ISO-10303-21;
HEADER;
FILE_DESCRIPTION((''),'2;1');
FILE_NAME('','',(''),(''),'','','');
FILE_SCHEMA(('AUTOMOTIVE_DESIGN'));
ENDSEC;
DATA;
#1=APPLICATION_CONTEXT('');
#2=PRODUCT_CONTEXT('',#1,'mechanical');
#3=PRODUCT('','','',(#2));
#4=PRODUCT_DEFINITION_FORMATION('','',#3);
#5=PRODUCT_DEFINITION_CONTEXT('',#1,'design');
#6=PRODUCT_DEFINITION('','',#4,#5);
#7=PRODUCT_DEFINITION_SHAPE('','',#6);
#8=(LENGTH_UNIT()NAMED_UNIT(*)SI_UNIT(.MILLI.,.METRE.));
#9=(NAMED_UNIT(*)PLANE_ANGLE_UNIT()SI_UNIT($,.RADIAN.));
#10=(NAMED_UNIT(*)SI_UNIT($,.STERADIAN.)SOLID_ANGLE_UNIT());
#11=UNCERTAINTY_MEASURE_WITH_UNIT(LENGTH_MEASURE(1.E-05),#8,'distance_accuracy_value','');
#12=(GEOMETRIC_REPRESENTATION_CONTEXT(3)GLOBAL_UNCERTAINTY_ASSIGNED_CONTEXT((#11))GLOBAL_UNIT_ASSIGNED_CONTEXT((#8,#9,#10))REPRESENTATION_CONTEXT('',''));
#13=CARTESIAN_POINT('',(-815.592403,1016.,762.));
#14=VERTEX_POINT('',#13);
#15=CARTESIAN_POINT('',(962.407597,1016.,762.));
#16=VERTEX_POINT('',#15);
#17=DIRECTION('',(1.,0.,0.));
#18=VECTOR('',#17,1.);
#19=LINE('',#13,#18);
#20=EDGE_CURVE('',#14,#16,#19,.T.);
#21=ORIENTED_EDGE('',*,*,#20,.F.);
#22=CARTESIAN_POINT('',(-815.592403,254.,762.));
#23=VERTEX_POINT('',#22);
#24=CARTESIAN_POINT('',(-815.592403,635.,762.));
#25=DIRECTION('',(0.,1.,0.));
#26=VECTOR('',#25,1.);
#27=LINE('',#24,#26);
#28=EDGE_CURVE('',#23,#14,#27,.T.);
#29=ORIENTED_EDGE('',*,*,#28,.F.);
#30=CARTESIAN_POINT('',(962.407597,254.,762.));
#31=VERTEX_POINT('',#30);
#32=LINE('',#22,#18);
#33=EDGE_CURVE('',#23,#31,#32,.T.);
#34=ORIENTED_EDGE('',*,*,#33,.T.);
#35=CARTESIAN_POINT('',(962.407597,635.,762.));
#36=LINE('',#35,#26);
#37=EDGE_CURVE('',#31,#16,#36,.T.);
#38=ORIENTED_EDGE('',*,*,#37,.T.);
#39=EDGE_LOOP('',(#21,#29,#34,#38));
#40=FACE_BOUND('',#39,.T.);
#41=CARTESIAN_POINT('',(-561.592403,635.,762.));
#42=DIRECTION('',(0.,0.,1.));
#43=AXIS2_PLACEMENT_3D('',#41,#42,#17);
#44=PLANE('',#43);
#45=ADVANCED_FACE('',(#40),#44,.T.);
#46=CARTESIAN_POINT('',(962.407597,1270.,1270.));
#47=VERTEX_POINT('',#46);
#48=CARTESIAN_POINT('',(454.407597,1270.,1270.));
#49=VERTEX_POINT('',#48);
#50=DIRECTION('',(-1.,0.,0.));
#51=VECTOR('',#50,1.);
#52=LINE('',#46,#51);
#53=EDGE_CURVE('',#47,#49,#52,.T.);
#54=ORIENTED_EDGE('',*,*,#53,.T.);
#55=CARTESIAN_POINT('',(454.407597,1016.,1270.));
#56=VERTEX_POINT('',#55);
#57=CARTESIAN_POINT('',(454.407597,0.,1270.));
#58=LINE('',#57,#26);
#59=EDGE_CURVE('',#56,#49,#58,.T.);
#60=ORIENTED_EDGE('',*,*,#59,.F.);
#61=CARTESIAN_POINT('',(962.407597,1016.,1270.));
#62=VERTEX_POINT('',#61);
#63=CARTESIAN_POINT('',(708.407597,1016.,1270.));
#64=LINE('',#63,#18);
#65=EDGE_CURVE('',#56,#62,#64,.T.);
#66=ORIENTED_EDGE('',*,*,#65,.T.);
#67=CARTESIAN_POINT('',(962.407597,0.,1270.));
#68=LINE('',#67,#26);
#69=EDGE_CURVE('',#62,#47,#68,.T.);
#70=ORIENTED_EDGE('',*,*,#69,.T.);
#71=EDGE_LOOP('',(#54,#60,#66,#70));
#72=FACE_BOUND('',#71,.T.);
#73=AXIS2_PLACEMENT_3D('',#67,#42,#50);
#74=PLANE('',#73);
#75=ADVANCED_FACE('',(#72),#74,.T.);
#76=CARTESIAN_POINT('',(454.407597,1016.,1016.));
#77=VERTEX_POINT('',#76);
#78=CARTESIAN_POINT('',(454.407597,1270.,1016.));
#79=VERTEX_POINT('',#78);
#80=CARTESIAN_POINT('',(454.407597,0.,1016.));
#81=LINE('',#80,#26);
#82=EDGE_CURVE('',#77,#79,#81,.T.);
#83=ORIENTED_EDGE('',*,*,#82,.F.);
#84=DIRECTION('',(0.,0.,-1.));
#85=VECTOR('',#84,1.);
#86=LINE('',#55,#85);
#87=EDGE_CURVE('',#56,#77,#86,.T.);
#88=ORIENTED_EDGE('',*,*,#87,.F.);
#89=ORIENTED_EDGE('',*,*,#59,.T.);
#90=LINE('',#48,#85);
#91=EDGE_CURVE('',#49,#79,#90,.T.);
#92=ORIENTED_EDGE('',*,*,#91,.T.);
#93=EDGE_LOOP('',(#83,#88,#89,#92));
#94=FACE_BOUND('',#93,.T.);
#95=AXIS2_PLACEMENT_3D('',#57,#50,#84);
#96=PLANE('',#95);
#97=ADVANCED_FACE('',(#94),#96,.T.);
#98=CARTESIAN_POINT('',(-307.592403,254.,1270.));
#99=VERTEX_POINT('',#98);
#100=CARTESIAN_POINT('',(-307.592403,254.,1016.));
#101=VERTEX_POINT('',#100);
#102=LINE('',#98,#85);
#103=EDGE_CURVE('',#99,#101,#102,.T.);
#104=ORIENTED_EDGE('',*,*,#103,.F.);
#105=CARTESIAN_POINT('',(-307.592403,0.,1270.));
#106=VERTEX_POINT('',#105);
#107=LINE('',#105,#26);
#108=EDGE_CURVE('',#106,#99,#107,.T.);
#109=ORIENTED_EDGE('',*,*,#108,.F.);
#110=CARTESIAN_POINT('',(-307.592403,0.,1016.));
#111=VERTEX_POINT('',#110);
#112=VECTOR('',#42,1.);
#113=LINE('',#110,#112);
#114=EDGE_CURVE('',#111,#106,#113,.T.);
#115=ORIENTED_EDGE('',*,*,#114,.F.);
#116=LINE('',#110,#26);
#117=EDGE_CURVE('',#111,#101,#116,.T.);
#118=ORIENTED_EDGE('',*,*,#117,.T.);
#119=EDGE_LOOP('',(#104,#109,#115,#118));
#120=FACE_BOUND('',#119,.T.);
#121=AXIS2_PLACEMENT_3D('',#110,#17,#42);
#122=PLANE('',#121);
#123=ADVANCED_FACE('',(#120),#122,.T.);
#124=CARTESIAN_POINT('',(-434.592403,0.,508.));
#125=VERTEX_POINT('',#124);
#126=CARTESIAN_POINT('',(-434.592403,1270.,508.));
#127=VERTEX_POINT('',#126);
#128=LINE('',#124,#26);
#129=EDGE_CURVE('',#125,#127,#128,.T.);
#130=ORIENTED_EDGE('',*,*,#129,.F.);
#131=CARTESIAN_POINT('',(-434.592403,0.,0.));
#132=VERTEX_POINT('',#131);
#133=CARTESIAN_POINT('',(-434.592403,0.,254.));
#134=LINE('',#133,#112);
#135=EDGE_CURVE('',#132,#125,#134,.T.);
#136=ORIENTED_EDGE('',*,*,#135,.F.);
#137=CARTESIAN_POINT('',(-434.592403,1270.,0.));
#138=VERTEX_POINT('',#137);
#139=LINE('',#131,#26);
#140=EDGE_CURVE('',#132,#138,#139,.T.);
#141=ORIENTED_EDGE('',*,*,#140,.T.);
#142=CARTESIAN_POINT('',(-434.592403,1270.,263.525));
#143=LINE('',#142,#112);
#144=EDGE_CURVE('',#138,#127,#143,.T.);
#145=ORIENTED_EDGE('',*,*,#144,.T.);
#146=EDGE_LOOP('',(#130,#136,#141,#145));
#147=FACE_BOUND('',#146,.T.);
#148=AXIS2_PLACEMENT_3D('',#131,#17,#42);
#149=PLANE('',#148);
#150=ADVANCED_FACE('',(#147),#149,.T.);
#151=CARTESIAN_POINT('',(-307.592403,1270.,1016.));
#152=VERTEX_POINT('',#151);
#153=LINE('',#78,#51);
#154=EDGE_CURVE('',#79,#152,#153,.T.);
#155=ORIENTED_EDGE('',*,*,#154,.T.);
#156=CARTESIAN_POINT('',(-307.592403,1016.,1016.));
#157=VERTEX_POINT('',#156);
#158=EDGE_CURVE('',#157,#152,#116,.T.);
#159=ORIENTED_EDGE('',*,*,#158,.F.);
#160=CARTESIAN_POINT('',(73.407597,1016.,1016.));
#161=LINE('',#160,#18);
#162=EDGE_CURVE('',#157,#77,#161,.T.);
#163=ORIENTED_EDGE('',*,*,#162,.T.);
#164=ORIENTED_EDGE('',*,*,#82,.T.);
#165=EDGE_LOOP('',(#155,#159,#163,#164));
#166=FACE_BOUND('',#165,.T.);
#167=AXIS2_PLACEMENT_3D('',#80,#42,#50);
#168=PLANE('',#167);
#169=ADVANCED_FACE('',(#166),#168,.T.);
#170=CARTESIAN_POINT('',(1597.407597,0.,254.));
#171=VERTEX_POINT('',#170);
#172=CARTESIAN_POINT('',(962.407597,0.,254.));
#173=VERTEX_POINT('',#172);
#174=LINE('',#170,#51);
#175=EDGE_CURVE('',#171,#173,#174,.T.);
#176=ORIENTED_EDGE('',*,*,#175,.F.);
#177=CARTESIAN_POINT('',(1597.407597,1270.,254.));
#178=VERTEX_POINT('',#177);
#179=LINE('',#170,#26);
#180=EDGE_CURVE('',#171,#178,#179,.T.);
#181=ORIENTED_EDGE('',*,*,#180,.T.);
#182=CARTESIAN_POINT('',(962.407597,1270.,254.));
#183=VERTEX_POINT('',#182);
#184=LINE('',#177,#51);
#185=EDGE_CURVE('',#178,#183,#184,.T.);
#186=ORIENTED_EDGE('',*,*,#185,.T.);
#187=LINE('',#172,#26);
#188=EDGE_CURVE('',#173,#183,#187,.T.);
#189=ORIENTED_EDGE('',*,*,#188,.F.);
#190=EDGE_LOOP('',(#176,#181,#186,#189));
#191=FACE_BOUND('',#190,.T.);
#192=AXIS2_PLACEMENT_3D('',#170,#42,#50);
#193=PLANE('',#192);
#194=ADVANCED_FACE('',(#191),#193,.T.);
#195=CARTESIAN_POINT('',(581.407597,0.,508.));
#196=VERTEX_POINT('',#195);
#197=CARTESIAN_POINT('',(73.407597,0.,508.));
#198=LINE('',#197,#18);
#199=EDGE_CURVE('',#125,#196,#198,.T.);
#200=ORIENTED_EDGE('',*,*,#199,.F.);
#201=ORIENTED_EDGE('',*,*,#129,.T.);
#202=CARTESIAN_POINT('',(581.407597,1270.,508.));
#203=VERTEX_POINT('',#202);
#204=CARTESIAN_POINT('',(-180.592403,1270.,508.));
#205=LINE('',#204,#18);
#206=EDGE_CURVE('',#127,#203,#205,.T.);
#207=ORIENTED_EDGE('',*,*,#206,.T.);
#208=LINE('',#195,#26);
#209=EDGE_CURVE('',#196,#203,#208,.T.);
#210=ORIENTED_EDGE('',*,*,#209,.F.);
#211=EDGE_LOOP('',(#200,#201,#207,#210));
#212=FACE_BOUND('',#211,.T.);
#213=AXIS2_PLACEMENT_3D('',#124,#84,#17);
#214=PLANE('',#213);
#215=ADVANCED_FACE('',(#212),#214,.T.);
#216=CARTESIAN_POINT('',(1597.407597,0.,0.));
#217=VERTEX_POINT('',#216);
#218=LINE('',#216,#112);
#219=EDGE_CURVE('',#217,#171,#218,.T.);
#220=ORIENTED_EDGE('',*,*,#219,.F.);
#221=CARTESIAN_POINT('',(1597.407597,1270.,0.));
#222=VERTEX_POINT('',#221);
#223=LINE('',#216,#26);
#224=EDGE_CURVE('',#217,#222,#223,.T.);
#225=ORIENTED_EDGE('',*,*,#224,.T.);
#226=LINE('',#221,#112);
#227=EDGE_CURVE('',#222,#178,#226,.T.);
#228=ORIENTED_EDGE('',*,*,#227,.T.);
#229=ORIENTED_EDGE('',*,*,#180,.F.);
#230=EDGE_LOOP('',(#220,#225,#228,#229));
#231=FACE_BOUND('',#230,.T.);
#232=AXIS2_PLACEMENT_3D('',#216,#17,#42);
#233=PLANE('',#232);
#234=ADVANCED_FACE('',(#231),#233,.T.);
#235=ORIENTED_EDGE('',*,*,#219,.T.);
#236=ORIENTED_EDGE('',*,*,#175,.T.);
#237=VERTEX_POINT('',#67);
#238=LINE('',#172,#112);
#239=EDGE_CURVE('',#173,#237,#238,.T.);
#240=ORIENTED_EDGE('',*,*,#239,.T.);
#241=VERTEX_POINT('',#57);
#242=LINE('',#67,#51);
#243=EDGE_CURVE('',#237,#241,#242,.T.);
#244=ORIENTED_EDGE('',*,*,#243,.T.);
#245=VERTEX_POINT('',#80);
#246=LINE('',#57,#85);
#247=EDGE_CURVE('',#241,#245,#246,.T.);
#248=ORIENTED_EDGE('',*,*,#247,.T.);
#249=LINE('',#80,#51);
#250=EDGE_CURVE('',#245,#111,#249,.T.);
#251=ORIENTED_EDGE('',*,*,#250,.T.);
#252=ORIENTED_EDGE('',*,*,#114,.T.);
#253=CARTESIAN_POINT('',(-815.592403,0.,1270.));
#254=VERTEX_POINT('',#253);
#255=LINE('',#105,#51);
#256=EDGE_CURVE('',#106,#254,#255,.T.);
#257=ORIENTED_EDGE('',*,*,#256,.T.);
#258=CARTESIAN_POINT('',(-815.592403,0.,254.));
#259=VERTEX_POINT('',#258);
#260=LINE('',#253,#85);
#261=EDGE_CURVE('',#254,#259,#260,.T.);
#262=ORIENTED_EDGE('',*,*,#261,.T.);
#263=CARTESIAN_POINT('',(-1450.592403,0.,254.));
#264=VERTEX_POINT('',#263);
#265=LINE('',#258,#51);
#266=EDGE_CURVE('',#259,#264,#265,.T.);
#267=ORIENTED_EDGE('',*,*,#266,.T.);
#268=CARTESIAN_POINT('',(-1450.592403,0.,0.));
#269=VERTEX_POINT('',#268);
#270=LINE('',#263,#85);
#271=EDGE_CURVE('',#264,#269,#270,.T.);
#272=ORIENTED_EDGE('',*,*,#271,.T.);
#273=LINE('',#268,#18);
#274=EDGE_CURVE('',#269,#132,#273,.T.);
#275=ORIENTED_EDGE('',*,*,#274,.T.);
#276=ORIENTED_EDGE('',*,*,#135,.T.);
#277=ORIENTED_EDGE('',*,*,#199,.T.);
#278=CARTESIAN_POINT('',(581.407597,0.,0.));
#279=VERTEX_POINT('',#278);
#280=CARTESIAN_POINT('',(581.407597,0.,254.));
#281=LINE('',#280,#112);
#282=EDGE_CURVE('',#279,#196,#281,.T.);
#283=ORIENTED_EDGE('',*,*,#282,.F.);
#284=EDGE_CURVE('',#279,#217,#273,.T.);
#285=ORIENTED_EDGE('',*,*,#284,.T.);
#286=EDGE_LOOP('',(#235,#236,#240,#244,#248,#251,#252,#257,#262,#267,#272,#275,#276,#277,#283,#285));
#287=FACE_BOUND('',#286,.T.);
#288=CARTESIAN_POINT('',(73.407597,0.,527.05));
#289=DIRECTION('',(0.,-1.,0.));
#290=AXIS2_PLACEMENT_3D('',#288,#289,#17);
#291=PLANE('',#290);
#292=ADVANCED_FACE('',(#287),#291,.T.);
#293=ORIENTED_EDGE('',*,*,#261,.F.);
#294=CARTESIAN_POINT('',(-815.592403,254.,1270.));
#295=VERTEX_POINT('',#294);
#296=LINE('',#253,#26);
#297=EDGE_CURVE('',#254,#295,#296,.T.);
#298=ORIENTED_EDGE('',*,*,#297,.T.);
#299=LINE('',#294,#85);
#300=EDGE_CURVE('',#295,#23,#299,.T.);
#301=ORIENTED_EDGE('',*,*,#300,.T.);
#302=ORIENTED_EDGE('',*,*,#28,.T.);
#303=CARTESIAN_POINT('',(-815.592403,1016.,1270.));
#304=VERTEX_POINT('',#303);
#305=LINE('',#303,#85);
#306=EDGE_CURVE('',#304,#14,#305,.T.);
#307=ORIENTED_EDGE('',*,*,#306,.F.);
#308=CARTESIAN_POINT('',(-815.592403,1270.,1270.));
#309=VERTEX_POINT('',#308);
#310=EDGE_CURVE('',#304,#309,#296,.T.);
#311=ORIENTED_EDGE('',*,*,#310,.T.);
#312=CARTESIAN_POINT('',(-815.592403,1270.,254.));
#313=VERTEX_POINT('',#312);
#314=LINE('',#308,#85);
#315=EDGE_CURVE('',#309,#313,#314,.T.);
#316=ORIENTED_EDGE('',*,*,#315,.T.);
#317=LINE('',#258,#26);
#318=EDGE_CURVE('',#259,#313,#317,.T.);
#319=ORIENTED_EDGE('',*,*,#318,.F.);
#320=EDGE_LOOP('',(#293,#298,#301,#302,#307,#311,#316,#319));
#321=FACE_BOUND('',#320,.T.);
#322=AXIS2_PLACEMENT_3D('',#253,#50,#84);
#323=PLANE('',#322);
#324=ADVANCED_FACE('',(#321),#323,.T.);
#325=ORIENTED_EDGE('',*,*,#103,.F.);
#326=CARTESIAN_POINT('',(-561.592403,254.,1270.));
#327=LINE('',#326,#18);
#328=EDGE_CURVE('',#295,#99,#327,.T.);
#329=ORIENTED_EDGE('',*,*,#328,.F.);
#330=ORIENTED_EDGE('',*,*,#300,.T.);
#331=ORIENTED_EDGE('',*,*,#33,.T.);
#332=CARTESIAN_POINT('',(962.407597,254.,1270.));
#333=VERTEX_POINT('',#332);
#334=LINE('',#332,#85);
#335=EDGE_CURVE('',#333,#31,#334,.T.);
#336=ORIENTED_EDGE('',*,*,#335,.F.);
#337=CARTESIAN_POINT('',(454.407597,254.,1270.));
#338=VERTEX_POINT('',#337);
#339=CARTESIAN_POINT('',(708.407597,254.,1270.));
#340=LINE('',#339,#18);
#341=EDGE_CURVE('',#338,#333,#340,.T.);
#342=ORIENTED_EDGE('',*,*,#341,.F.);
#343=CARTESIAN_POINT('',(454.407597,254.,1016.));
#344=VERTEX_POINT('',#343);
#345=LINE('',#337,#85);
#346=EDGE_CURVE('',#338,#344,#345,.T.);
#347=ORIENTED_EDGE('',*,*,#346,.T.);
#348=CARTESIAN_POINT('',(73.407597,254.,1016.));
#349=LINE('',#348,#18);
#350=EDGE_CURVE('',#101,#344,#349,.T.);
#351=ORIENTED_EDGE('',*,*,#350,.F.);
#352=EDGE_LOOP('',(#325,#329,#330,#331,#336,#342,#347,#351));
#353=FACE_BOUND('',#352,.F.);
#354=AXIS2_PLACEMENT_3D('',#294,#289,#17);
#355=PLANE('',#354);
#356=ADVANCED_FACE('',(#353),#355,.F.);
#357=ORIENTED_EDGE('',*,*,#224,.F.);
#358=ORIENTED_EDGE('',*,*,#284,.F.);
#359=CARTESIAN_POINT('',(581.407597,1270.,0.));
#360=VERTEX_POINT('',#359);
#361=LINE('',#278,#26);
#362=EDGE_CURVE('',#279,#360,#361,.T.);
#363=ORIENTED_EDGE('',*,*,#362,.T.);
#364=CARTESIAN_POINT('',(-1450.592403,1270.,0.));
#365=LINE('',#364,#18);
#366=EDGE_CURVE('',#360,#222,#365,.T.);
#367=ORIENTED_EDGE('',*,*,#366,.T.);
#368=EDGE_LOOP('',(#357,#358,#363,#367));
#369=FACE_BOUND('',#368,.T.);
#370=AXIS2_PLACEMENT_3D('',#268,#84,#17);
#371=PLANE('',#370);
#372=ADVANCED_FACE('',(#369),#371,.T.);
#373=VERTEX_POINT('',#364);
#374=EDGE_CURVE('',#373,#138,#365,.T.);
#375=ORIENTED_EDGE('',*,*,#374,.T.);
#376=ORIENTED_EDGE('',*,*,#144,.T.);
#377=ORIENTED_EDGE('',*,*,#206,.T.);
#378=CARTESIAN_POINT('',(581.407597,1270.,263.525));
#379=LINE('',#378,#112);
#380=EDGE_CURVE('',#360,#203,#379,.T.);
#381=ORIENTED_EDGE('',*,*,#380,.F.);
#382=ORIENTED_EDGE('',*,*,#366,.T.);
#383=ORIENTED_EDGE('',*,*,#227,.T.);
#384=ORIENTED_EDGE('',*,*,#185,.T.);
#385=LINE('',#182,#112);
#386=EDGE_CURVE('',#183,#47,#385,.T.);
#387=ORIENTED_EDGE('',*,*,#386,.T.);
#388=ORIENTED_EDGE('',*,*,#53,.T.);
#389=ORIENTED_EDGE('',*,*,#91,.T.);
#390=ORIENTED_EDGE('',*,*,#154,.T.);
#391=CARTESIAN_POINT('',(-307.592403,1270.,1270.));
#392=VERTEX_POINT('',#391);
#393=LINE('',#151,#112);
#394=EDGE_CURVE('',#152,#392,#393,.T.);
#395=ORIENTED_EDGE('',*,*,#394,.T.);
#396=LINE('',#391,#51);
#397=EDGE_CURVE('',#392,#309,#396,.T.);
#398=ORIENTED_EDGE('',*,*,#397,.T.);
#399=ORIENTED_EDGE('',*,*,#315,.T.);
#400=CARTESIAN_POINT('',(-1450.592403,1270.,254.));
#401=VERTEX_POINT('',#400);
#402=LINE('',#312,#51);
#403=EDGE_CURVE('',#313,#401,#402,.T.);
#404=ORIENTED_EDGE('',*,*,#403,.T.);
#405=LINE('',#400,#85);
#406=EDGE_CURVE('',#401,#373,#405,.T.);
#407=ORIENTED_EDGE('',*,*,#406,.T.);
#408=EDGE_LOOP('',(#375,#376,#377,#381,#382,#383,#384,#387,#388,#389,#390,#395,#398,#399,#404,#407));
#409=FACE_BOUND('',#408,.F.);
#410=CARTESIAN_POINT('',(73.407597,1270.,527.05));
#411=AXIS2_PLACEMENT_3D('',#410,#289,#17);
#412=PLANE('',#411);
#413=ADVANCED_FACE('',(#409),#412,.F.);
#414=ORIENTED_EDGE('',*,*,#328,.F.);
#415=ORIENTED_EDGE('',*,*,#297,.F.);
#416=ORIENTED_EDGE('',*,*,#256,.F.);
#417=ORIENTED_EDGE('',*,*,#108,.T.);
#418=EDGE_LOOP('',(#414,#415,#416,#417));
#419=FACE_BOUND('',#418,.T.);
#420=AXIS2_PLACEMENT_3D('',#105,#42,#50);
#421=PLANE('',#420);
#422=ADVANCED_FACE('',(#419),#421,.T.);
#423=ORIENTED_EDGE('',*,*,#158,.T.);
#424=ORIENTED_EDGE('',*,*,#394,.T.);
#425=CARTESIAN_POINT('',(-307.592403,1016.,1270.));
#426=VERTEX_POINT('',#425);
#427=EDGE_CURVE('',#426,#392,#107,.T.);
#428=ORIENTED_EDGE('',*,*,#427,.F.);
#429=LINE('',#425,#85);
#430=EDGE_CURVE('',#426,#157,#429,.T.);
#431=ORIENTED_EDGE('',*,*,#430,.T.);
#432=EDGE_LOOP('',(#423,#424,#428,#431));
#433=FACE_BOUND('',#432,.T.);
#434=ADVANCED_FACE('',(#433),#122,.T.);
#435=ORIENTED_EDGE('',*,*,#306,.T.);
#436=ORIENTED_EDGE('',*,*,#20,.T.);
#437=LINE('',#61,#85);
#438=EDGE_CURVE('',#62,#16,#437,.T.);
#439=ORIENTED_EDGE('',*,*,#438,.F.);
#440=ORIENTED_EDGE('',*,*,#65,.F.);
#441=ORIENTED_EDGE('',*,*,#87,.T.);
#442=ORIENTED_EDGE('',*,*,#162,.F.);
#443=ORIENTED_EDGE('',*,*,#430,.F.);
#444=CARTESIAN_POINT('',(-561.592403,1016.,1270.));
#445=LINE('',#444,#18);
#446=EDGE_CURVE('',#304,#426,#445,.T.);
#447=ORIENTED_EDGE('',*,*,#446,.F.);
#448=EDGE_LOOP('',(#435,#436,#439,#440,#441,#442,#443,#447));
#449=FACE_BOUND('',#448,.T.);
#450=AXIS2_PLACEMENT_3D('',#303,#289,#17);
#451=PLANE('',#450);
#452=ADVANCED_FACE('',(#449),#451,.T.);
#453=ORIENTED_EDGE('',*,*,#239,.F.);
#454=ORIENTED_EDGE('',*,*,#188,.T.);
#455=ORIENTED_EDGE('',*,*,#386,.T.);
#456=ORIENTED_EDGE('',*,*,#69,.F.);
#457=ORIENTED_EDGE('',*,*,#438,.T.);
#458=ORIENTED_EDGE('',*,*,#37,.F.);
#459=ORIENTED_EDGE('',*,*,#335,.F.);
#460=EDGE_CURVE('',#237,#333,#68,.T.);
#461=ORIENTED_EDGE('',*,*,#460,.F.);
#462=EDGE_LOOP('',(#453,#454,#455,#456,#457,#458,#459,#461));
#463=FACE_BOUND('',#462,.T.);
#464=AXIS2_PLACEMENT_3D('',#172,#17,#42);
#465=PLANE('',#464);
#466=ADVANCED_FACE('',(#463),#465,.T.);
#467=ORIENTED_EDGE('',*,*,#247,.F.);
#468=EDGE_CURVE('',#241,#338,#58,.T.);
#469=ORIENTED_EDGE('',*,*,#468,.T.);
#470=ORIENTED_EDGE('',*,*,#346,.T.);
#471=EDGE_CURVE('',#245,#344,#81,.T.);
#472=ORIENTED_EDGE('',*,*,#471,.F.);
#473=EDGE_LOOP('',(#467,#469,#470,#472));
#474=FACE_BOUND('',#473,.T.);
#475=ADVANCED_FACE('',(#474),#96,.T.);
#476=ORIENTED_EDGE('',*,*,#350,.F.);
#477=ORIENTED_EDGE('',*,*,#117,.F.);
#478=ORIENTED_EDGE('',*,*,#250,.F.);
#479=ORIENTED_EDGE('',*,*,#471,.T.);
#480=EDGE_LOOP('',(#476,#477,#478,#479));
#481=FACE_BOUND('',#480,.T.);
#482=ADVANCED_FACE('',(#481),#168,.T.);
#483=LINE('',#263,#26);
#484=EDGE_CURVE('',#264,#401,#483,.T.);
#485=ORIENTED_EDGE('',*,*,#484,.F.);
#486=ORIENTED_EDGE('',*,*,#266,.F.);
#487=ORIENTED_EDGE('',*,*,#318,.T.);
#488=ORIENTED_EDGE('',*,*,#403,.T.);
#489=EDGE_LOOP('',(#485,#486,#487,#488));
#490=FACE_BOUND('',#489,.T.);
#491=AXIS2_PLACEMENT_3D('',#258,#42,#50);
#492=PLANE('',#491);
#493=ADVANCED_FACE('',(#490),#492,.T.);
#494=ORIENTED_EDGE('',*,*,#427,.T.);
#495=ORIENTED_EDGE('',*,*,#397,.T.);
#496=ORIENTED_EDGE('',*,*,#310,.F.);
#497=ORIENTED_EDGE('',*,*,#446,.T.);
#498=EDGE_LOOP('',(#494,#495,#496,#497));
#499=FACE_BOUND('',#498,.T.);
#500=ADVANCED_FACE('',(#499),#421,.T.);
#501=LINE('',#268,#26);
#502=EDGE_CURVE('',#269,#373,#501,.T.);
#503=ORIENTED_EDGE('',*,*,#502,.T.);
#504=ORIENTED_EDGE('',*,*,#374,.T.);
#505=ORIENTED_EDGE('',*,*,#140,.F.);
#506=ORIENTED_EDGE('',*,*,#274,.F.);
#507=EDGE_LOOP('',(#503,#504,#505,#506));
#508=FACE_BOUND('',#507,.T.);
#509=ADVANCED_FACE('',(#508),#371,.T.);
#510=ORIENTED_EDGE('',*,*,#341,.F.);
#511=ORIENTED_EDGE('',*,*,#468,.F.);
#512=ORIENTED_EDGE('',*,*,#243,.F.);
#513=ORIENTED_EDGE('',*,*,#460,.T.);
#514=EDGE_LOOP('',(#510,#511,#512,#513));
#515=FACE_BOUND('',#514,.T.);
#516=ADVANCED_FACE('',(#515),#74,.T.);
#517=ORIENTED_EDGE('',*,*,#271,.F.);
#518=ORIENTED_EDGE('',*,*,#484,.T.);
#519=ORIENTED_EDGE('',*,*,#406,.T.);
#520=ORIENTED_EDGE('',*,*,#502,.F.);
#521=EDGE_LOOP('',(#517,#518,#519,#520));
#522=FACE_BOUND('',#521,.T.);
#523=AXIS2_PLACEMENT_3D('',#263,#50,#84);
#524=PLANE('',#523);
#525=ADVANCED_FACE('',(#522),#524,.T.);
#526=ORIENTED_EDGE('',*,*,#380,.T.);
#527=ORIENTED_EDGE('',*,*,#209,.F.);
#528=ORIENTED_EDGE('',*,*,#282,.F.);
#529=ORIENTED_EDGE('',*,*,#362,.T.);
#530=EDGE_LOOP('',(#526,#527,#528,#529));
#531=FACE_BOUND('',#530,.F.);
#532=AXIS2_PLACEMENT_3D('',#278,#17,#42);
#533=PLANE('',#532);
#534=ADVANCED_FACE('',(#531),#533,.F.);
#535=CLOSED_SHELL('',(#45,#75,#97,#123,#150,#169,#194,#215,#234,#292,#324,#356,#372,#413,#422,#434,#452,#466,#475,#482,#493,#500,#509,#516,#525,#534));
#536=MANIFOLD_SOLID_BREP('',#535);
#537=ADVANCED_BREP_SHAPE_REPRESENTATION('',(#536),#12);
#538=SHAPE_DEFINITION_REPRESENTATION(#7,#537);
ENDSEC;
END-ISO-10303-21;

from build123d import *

# Parameters (mm, degrees)
F1_W     = 1016
F1_H     = 508
F2_DEPTH = 1270
F3_DEPTH = 1270.001
F4_W     = 508
F4_H     = 762
F5_DEPTH = 508
F6_W     = 508
F6_H     = 762
F7_DEPTH = 508
F8_W     = 762
F8_H     = 762
F9_DEPTH = 254


# Not quite as in the source:
# - a variable given as a bare number and used for a length is read in inches; the dataset says mm whatever the document's units were


with BuildPart() as f2:
    # F1 (on Front) → F2 (new body)
    with BuildSketch(Plane.XZ):
        Polygon((-1450.5924028924, 254), (-1450.5924028924, 0), (-434.5924028924, 0), (-434.5924028924, 508), (581.4075971076, 508), (581.4075971076, 0), (1597.4075971076, 0), (1597.4075971076, 254), (962.4075971076, 254), (962.4075971076, 1270), (454.4075971076, 1270), (454.4075971076, 1016), (-307.5924028924, 1016), (-307.5924028924, 1270), (-815.5924028924, 1270), (-815.5924028924, 254), align=None)
        with Locations((73.4075971076, 254)):
            Rectangle(F1_W, F1_H)
    extrude(amount=-F2_DEPTH)

    # F1 (on Front) → F3 (cut, through all)
    with BuildSketch(Plane.XZ):
        with Locations((73.4075971076, 254)):
            Rectangle(F1_W, F1_H)
    extrude(amount=-F3_DEPTH, mode=Mode.SUBTRACT)

    # F4 (on face) → F5 (cut)
    with BuildSketch(Plane.XY.offset(1270)):
        with Locations((-561.5924028924, 635)):
            Rectangle(F4_W, F4_H)
    extrude(amount=-F5_DEPTH, mode=Mode.SUBTRACT)

    # F6 (on face) → F7 (cut)
    with BuildSketch(Plane.XY.offset(1270)):
        with Locations((708.4075971076, 635)):
            Rectangle(F6_W, F6_H)
    extrude(amount=-F7_DEPTH, mode=Mode.SUBTRACT)

    # F8 (on face) → F9 (cut)
    with BuildSketch(Plane.XY.offset(1016)):
        with Locations((73.4075971076, 635)):
            Rectangle(F8_W, F8_H)
    extrude(amount=-F9_DEPTH, mode=Mode.SUBTRACT)


solid = f2.part
